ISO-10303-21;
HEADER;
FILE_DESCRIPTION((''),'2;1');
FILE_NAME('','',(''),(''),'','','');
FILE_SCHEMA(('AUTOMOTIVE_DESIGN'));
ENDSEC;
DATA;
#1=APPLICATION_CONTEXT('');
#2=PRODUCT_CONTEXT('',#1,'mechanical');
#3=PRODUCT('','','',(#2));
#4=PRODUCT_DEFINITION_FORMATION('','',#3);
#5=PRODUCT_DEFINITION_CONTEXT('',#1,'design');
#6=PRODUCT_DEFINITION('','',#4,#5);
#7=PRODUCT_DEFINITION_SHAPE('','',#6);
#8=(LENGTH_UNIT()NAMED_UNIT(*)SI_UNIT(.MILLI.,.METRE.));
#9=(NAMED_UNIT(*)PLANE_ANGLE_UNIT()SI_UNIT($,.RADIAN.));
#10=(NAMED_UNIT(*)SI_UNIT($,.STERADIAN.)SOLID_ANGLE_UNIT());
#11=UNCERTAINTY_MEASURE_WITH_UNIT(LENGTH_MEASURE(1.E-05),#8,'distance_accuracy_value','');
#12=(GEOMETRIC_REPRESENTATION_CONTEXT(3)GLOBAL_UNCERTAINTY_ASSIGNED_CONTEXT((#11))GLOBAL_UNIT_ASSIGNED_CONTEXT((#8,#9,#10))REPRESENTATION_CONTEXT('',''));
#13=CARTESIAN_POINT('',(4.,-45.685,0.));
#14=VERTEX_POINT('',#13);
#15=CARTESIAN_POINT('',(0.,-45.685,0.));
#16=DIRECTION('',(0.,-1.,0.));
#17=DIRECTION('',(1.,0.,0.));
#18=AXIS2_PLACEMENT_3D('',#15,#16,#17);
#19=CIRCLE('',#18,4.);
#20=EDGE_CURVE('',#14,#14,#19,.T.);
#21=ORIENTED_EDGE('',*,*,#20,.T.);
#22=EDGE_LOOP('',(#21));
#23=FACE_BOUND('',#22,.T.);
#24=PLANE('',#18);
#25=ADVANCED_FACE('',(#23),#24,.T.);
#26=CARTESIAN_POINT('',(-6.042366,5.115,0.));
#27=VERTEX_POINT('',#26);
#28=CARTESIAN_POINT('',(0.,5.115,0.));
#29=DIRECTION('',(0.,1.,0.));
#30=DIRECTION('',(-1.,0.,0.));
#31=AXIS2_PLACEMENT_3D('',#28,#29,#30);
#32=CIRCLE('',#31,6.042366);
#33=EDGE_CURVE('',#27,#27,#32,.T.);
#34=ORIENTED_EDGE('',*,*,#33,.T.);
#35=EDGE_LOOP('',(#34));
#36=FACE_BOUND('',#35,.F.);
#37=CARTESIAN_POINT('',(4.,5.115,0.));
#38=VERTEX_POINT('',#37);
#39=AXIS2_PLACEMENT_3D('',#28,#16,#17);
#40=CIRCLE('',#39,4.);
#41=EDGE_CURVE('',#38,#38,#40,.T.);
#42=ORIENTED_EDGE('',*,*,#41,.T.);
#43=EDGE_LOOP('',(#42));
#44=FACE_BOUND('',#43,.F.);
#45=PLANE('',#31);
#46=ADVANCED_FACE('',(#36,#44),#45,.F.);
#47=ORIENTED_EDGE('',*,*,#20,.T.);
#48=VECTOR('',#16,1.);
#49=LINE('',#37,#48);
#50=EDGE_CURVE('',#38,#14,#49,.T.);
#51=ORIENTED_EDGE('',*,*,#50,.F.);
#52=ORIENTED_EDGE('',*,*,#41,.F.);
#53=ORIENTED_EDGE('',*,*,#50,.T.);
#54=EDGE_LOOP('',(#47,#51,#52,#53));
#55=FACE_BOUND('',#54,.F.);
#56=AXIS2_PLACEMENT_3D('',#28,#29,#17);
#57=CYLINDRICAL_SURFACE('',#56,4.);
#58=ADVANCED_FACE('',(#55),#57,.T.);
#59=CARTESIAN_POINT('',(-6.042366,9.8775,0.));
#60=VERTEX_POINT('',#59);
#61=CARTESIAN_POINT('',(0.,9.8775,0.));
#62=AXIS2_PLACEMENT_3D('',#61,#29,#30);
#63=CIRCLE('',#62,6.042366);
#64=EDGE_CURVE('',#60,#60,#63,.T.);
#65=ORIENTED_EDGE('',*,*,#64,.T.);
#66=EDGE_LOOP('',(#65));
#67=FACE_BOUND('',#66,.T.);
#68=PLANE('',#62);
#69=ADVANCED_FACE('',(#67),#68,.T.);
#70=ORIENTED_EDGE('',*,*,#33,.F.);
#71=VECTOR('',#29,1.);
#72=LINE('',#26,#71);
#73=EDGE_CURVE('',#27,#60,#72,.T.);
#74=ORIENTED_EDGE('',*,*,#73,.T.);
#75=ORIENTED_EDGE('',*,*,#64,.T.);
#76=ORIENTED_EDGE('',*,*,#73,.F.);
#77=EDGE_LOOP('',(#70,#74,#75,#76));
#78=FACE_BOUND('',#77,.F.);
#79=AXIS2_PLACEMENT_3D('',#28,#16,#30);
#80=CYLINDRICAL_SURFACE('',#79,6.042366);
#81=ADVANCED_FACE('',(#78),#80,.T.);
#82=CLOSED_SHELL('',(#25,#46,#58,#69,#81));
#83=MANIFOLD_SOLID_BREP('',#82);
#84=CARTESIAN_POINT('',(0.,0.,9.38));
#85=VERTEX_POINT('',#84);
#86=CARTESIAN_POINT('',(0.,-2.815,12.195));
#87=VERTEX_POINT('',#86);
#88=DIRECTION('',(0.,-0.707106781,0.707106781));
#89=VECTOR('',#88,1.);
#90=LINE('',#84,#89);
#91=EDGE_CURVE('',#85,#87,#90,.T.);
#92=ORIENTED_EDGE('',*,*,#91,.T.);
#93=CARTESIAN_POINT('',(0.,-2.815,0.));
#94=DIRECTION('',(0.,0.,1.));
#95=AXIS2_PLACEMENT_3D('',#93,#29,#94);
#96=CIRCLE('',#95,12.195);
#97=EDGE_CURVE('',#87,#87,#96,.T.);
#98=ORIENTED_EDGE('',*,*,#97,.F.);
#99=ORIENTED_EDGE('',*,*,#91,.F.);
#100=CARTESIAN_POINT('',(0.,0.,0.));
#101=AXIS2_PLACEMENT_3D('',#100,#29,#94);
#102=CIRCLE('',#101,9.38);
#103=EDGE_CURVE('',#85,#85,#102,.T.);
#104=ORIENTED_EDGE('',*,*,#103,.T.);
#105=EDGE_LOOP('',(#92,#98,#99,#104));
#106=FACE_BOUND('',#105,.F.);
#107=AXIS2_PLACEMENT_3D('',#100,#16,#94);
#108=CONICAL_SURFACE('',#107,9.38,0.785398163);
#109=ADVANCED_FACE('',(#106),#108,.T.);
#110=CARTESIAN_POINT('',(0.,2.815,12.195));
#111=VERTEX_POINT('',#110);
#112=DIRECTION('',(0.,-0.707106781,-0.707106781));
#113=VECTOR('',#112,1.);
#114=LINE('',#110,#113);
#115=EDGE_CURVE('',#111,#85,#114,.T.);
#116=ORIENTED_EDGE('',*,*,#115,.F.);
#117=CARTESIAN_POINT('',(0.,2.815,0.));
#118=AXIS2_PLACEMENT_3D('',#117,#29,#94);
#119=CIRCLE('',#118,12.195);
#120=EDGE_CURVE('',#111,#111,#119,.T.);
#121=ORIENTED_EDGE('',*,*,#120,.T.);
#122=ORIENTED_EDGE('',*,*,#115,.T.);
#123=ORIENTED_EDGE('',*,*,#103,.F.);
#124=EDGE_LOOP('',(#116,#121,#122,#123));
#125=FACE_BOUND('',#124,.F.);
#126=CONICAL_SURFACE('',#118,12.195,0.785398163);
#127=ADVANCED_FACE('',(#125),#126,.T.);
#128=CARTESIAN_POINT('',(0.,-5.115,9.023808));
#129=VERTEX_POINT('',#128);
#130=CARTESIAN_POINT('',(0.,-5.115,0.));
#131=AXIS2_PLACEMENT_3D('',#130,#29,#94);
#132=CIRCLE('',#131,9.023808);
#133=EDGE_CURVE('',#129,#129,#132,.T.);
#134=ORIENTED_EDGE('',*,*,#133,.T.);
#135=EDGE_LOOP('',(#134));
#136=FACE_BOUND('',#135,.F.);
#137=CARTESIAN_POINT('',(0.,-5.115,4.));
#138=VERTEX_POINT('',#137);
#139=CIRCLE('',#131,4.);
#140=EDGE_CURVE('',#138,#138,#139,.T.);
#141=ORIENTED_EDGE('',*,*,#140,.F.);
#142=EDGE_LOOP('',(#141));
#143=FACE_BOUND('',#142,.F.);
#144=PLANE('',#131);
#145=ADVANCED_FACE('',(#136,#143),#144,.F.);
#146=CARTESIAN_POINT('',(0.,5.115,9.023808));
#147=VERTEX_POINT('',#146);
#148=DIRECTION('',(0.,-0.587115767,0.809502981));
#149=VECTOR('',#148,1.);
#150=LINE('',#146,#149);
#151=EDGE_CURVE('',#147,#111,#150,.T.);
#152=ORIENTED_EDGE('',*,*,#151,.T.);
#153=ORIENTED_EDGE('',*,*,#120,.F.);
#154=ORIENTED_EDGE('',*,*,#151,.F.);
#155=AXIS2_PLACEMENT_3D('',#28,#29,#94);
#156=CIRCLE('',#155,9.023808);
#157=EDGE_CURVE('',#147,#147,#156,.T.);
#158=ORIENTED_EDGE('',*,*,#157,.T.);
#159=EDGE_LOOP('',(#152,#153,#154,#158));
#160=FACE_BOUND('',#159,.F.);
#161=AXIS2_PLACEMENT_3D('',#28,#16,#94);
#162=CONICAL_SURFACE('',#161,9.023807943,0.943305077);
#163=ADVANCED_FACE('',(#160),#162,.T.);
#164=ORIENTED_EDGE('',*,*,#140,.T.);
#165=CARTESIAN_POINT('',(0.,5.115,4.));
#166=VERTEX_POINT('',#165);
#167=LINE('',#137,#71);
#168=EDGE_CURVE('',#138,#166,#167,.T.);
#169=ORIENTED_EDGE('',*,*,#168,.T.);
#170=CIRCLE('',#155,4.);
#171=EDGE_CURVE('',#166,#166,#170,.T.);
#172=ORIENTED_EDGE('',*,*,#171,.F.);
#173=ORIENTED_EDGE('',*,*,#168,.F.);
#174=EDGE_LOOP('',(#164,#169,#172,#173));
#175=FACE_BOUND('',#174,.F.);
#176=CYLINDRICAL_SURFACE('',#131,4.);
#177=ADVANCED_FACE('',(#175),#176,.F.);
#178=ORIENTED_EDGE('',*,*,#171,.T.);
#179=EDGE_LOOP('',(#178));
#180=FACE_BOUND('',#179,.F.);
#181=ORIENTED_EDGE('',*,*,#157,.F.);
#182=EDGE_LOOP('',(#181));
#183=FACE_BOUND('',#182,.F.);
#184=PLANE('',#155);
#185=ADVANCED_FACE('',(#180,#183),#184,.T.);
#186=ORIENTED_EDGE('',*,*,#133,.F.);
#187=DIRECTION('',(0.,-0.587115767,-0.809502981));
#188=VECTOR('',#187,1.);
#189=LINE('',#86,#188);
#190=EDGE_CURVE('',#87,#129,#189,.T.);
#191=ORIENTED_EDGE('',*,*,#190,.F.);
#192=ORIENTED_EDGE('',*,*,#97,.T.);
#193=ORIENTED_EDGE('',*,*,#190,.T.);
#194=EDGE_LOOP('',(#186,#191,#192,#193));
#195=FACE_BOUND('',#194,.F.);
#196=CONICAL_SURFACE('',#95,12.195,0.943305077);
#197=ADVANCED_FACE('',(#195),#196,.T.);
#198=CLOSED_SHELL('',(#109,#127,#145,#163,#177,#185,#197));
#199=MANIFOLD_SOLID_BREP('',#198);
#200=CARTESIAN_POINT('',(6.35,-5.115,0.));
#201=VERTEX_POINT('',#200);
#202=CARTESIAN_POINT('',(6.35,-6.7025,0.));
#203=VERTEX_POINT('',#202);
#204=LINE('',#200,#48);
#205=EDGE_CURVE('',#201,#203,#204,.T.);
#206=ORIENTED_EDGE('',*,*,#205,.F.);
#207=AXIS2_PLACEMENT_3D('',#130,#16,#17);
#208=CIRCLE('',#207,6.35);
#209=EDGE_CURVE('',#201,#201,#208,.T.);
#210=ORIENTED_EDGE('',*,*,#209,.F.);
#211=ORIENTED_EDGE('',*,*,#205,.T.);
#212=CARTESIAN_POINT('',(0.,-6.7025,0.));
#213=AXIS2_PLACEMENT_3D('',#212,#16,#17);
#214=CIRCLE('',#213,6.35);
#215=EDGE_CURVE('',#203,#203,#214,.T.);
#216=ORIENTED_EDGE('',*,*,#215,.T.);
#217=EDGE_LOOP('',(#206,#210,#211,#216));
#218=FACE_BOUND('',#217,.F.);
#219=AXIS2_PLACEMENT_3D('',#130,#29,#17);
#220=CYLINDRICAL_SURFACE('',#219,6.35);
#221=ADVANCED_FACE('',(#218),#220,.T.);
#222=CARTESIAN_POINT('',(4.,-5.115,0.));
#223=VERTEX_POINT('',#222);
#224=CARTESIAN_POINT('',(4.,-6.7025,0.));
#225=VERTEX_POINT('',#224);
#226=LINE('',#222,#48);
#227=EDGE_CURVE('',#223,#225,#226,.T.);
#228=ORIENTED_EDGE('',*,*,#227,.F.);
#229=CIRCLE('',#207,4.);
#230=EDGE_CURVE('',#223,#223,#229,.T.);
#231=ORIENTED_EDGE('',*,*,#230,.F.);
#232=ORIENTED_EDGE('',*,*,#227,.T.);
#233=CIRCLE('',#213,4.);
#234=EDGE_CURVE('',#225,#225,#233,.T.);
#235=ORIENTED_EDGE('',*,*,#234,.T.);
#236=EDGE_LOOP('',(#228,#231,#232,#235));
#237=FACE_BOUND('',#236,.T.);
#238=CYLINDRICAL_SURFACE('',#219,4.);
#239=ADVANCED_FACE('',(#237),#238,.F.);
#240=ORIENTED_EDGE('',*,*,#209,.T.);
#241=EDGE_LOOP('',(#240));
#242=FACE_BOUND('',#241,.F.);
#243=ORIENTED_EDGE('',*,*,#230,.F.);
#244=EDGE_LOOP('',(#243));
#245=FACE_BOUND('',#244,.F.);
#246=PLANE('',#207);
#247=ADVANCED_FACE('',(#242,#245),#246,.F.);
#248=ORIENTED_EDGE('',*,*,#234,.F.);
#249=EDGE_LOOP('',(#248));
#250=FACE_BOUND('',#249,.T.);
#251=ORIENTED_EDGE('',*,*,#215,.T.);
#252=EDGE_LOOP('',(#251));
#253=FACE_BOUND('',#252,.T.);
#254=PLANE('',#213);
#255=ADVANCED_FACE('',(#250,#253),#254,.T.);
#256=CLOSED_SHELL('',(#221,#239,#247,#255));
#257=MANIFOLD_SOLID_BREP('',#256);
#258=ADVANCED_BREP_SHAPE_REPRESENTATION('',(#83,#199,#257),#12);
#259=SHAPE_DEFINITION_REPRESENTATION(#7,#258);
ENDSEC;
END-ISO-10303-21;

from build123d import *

# Parameters (mm, degrees)
F2_R     = 6.35
F2_R_2   = 4
F3_DEPTH = 1.5875
F4_R     = 6.0423658591
F5_DEPTH = 4.7625
F6_R     = 4
F7_DEPTH = 50.8


with BuildPart() as f1:
    # F0 (on Right) → F1 (revolve)
    with BuildSketch(Plane.YZ):
        Polygon((-5.115, 9.0238079429), (-5.115, 4), (5.115, 4), (5.115, 9.0238079429), (2.815, 12.195), (0, 9.38), (-2.815, 12.195), align=None)
    revolve(axis=Axis((0, -0.9241095702, 0), (0, 1, 0)))


with BuildPart() as f3:
    # F2 (on face) → F3 (new body)
    with BuildSketch(Plane.XZ.offset(5.115)):
        Circle(F2_R)
        Circle(F2_R_2, mode=Mode.SUBTRACT)
    extrude(amount=F3_DEPTH)


with BuildPart() as f5:
    # F4 (on face) → F5 (new body)
    with BuildSketch(Plane(origin=(0, 5.115, 0), x_dir=(-1, 0, 0), z_dir=(0, 1, 0))):
        Circle(F4_R)
    extrude(amount=F5_DEPTH)

    # F6 (on face) → F7 (join)
    with BuildSketch(Plane.XZ.offset(-5.115)):
        Circle(F6_R)
    extrude(amount=F7_DEPTH)


solid = Compound([f1.part, f3.part, f5.part])
